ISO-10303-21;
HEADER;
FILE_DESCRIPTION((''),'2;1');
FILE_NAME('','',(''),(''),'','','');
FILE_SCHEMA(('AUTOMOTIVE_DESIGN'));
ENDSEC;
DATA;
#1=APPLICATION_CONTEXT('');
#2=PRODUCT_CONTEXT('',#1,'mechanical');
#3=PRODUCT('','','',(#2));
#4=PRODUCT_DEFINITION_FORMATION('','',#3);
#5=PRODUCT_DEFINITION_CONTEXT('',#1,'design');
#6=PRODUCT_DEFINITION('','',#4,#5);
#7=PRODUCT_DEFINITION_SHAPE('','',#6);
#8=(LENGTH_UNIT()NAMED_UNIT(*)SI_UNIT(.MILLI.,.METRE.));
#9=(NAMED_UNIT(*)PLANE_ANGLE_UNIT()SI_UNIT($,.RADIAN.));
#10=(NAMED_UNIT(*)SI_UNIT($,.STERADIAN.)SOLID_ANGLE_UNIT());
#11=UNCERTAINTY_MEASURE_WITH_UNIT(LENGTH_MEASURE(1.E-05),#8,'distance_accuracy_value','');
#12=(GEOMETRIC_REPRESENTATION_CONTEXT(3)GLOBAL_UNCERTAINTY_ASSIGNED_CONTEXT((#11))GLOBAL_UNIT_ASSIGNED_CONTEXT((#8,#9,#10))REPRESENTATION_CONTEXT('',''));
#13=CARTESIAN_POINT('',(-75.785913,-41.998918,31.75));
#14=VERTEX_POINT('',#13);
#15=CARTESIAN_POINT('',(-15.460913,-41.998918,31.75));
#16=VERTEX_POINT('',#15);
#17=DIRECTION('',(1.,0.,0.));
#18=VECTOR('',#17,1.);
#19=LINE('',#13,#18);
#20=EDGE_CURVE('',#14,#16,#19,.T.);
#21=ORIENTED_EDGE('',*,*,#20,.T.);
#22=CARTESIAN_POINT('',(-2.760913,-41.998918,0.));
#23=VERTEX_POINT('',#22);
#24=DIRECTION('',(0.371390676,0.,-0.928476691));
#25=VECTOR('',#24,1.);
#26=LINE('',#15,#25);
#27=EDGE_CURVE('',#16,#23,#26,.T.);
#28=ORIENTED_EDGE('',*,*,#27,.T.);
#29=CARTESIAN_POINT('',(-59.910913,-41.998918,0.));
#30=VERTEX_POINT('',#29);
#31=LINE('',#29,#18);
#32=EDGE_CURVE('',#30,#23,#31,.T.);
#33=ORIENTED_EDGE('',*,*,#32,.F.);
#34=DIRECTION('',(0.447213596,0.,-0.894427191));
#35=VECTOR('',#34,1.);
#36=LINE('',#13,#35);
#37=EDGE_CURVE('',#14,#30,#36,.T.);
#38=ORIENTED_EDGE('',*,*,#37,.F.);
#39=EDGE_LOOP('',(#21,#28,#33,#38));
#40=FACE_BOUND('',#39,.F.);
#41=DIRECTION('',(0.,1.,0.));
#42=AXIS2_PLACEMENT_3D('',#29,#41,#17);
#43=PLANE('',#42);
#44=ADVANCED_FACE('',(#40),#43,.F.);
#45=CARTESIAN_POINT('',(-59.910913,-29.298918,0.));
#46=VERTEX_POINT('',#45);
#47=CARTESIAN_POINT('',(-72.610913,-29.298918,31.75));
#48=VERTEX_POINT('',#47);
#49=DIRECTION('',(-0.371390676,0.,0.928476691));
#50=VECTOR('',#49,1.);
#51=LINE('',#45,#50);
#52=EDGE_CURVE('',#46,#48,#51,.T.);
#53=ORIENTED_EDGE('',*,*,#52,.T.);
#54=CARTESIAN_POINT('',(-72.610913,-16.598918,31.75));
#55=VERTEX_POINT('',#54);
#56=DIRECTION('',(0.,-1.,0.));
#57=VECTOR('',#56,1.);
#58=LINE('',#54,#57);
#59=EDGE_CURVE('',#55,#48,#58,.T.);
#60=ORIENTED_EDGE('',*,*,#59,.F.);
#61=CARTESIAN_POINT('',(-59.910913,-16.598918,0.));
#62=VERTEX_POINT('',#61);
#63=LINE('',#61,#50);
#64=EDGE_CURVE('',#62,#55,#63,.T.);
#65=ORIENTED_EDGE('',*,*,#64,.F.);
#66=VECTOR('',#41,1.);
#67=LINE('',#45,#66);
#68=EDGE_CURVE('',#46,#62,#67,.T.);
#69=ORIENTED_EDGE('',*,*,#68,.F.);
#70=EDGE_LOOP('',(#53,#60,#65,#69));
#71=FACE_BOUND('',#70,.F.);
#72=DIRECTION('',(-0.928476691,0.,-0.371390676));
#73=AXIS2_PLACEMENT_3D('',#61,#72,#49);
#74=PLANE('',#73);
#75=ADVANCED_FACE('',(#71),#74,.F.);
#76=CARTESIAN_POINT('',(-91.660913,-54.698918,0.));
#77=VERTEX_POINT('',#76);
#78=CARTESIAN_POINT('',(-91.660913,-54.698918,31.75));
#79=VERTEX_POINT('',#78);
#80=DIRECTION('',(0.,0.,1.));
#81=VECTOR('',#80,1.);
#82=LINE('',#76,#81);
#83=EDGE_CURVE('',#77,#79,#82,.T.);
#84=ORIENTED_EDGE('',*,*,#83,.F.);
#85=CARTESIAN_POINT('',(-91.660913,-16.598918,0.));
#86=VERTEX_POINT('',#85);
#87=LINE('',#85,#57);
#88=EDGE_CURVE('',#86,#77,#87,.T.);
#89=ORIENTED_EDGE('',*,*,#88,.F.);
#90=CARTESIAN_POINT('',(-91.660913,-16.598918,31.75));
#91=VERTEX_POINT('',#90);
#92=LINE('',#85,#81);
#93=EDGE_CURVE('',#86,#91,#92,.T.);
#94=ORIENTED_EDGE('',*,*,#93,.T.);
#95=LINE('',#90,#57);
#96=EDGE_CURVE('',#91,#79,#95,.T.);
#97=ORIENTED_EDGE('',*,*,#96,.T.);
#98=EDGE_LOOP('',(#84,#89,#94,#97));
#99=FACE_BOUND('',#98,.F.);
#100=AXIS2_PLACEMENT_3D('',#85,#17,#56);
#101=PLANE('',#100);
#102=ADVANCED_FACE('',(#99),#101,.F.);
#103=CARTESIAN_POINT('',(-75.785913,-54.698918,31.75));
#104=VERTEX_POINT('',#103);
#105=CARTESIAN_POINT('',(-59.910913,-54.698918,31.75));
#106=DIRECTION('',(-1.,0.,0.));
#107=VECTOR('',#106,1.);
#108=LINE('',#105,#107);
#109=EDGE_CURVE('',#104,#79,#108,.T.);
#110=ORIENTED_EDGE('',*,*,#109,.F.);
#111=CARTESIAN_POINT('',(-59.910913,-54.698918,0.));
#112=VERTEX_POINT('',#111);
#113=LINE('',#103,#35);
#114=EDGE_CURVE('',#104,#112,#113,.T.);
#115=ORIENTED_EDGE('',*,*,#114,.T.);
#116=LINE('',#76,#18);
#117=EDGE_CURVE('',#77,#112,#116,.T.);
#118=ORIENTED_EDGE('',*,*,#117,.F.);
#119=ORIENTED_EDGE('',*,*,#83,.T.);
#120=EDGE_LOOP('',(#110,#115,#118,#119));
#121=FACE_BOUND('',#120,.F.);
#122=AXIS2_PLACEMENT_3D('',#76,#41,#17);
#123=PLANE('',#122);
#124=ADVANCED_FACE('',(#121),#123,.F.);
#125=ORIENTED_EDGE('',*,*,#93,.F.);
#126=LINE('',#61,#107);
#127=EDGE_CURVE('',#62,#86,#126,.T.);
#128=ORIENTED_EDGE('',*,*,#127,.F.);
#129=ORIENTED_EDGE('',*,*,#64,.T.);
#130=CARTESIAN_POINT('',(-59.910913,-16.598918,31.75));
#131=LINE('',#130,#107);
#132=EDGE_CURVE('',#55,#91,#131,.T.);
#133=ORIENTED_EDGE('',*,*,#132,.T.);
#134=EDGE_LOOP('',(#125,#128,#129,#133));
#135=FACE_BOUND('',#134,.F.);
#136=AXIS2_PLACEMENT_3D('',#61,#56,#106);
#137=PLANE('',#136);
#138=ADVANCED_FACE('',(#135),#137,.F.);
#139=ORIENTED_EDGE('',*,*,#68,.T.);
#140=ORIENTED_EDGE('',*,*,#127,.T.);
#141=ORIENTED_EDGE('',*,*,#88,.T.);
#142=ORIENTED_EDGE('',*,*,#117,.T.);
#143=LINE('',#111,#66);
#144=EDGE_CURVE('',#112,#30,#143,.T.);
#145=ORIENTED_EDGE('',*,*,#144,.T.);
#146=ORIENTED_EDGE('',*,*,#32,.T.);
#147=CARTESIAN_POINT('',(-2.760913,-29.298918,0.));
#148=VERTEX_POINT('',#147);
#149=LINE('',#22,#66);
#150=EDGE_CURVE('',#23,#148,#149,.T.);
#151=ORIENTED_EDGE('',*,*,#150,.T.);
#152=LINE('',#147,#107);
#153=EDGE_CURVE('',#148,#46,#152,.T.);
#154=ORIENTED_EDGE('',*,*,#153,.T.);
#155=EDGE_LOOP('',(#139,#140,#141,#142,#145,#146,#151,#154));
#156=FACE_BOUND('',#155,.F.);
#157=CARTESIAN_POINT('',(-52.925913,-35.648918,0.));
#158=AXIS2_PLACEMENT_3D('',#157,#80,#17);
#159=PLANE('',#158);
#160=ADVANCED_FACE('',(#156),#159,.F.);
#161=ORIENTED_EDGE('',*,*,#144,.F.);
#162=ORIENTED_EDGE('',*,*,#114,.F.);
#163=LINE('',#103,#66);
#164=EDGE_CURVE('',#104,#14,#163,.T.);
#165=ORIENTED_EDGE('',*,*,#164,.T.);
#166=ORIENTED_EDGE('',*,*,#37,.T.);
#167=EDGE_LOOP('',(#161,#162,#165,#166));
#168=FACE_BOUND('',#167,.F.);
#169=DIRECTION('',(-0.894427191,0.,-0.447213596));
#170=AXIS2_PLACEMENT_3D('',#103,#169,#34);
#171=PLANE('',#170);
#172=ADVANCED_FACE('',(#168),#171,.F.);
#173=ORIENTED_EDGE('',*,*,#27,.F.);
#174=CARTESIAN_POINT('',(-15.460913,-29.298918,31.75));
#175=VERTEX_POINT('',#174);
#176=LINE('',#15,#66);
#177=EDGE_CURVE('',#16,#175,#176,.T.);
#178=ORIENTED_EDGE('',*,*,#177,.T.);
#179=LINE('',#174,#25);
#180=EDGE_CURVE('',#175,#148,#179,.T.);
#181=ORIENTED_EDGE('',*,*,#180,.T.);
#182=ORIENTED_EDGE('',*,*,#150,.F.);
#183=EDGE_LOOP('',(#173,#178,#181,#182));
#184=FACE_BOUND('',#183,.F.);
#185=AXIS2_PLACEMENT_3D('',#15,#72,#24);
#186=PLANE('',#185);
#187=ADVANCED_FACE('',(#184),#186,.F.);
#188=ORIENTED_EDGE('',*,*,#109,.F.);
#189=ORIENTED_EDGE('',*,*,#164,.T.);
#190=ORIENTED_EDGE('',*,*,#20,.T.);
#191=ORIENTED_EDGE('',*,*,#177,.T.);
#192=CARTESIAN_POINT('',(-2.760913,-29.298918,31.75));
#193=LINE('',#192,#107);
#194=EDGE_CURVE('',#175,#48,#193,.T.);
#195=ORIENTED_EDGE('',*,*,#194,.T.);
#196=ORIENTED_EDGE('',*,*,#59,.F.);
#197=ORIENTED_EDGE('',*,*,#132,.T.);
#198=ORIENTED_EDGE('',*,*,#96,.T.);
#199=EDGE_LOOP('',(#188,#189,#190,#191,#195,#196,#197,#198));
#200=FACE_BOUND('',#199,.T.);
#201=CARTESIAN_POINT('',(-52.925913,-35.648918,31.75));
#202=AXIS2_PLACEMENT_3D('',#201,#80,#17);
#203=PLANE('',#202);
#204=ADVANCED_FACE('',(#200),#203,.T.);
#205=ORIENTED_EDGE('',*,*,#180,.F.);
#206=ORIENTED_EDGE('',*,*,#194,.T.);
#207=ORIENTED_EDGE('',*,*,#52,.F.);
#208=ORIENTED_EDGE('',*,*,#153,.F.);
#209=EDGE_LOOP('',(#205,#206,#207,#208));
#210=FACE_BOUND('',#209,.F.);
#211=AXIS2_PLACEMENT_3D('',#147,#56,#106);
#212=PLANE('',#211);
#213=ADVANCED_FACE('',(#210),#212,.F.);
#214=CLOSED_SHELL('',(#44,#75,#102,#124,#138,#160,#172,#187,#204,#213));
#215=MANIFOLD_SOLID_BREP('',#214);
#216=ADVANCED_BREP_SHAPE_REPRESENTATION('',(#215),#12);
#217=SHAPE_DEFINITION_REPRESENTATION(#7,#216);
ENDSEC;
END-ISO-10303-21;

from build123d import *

# Parameters (mm, degrees)
F1_DEPTH = 31.75
F3_DEPTH = 25.4
F5_DEPTH = 12.7
F7_DEPTH = 12.7
F9_DEPTH = 12.7


# Not quite as in the source:
# - a length typed as a fraction of an inch, garbled in the dataset ("3 / 203.2 mm" for 3/8 in), is restored


with BuildPart() as f1:
    # F0 (on Top) → F1 (new body)
    with BuildSketch(Plane.XY):
        Polygon((-59.9109128669, -16.5989177401), (-91.6609128669, -16.5989177401), (-91.6609128669, -54.6989177401), (-59.9109128669, -54.6989177401), (-59.9109128669, -41.9989177401), (-2.7609128669, -41.9989177401), (-2.7609128669, -29.2989177401), (-59.9109128669, -29.2989177401), align=None)
    extrude(amount=F1_DEPTH)

    # F2 (on face) → F3 (cut)
    with BuildSketch(Plane.XZ.offset(54.6989177401)):
        Polygon((-74.4201987982, 31.75), (-59.9109128669, 0), (-59.9109128669, 31.75), align=None)
    extrude(amount=F3_DEPTH, mode=Mode.SUBTRACT)

    # F4 (on face) → F5 (cut)
    with BuildSketch(Plane.XZ.offset(54.6989177401)):
        Polygon((-75.7859128669, 31.75), (-59.9109128669, 0), (-46.3341996074, 12.059702538), (-46.3341996074, 45.9536202252), (-62.0433166623, 45.9536202252), align=None)
    extrude(amount=-F5_DEPTH, mode=Mode.SUBTRACT)

    # F6 (on face) → F7 (cut)
    with BuildSketch(Plane(origin=(0, -16.5989177401, 0), x_dir=(-1, 0, 0), z_dir=(0, 1, 0))):
        Polygon((59.9109128669, 0), (72.6109128669, 31.75), (59.9109128669, 31.75), align=None)
    extrude(amount=-F7_DEPTH, mode=Mode.SUBTRACT)

    # F8 (on face) → F9 (cut)
    with BuildSketch(Plane.XZ.offset(41.9989177401)):
        Polygon((-15.4609128669, 31.75), (-2.7609128669, 0), (-2.7609128669, 31.75), align=None)
    extrude(amount=-F9_DEPTH, mode=Mode.SUBTRACT)


solid = f1.part
